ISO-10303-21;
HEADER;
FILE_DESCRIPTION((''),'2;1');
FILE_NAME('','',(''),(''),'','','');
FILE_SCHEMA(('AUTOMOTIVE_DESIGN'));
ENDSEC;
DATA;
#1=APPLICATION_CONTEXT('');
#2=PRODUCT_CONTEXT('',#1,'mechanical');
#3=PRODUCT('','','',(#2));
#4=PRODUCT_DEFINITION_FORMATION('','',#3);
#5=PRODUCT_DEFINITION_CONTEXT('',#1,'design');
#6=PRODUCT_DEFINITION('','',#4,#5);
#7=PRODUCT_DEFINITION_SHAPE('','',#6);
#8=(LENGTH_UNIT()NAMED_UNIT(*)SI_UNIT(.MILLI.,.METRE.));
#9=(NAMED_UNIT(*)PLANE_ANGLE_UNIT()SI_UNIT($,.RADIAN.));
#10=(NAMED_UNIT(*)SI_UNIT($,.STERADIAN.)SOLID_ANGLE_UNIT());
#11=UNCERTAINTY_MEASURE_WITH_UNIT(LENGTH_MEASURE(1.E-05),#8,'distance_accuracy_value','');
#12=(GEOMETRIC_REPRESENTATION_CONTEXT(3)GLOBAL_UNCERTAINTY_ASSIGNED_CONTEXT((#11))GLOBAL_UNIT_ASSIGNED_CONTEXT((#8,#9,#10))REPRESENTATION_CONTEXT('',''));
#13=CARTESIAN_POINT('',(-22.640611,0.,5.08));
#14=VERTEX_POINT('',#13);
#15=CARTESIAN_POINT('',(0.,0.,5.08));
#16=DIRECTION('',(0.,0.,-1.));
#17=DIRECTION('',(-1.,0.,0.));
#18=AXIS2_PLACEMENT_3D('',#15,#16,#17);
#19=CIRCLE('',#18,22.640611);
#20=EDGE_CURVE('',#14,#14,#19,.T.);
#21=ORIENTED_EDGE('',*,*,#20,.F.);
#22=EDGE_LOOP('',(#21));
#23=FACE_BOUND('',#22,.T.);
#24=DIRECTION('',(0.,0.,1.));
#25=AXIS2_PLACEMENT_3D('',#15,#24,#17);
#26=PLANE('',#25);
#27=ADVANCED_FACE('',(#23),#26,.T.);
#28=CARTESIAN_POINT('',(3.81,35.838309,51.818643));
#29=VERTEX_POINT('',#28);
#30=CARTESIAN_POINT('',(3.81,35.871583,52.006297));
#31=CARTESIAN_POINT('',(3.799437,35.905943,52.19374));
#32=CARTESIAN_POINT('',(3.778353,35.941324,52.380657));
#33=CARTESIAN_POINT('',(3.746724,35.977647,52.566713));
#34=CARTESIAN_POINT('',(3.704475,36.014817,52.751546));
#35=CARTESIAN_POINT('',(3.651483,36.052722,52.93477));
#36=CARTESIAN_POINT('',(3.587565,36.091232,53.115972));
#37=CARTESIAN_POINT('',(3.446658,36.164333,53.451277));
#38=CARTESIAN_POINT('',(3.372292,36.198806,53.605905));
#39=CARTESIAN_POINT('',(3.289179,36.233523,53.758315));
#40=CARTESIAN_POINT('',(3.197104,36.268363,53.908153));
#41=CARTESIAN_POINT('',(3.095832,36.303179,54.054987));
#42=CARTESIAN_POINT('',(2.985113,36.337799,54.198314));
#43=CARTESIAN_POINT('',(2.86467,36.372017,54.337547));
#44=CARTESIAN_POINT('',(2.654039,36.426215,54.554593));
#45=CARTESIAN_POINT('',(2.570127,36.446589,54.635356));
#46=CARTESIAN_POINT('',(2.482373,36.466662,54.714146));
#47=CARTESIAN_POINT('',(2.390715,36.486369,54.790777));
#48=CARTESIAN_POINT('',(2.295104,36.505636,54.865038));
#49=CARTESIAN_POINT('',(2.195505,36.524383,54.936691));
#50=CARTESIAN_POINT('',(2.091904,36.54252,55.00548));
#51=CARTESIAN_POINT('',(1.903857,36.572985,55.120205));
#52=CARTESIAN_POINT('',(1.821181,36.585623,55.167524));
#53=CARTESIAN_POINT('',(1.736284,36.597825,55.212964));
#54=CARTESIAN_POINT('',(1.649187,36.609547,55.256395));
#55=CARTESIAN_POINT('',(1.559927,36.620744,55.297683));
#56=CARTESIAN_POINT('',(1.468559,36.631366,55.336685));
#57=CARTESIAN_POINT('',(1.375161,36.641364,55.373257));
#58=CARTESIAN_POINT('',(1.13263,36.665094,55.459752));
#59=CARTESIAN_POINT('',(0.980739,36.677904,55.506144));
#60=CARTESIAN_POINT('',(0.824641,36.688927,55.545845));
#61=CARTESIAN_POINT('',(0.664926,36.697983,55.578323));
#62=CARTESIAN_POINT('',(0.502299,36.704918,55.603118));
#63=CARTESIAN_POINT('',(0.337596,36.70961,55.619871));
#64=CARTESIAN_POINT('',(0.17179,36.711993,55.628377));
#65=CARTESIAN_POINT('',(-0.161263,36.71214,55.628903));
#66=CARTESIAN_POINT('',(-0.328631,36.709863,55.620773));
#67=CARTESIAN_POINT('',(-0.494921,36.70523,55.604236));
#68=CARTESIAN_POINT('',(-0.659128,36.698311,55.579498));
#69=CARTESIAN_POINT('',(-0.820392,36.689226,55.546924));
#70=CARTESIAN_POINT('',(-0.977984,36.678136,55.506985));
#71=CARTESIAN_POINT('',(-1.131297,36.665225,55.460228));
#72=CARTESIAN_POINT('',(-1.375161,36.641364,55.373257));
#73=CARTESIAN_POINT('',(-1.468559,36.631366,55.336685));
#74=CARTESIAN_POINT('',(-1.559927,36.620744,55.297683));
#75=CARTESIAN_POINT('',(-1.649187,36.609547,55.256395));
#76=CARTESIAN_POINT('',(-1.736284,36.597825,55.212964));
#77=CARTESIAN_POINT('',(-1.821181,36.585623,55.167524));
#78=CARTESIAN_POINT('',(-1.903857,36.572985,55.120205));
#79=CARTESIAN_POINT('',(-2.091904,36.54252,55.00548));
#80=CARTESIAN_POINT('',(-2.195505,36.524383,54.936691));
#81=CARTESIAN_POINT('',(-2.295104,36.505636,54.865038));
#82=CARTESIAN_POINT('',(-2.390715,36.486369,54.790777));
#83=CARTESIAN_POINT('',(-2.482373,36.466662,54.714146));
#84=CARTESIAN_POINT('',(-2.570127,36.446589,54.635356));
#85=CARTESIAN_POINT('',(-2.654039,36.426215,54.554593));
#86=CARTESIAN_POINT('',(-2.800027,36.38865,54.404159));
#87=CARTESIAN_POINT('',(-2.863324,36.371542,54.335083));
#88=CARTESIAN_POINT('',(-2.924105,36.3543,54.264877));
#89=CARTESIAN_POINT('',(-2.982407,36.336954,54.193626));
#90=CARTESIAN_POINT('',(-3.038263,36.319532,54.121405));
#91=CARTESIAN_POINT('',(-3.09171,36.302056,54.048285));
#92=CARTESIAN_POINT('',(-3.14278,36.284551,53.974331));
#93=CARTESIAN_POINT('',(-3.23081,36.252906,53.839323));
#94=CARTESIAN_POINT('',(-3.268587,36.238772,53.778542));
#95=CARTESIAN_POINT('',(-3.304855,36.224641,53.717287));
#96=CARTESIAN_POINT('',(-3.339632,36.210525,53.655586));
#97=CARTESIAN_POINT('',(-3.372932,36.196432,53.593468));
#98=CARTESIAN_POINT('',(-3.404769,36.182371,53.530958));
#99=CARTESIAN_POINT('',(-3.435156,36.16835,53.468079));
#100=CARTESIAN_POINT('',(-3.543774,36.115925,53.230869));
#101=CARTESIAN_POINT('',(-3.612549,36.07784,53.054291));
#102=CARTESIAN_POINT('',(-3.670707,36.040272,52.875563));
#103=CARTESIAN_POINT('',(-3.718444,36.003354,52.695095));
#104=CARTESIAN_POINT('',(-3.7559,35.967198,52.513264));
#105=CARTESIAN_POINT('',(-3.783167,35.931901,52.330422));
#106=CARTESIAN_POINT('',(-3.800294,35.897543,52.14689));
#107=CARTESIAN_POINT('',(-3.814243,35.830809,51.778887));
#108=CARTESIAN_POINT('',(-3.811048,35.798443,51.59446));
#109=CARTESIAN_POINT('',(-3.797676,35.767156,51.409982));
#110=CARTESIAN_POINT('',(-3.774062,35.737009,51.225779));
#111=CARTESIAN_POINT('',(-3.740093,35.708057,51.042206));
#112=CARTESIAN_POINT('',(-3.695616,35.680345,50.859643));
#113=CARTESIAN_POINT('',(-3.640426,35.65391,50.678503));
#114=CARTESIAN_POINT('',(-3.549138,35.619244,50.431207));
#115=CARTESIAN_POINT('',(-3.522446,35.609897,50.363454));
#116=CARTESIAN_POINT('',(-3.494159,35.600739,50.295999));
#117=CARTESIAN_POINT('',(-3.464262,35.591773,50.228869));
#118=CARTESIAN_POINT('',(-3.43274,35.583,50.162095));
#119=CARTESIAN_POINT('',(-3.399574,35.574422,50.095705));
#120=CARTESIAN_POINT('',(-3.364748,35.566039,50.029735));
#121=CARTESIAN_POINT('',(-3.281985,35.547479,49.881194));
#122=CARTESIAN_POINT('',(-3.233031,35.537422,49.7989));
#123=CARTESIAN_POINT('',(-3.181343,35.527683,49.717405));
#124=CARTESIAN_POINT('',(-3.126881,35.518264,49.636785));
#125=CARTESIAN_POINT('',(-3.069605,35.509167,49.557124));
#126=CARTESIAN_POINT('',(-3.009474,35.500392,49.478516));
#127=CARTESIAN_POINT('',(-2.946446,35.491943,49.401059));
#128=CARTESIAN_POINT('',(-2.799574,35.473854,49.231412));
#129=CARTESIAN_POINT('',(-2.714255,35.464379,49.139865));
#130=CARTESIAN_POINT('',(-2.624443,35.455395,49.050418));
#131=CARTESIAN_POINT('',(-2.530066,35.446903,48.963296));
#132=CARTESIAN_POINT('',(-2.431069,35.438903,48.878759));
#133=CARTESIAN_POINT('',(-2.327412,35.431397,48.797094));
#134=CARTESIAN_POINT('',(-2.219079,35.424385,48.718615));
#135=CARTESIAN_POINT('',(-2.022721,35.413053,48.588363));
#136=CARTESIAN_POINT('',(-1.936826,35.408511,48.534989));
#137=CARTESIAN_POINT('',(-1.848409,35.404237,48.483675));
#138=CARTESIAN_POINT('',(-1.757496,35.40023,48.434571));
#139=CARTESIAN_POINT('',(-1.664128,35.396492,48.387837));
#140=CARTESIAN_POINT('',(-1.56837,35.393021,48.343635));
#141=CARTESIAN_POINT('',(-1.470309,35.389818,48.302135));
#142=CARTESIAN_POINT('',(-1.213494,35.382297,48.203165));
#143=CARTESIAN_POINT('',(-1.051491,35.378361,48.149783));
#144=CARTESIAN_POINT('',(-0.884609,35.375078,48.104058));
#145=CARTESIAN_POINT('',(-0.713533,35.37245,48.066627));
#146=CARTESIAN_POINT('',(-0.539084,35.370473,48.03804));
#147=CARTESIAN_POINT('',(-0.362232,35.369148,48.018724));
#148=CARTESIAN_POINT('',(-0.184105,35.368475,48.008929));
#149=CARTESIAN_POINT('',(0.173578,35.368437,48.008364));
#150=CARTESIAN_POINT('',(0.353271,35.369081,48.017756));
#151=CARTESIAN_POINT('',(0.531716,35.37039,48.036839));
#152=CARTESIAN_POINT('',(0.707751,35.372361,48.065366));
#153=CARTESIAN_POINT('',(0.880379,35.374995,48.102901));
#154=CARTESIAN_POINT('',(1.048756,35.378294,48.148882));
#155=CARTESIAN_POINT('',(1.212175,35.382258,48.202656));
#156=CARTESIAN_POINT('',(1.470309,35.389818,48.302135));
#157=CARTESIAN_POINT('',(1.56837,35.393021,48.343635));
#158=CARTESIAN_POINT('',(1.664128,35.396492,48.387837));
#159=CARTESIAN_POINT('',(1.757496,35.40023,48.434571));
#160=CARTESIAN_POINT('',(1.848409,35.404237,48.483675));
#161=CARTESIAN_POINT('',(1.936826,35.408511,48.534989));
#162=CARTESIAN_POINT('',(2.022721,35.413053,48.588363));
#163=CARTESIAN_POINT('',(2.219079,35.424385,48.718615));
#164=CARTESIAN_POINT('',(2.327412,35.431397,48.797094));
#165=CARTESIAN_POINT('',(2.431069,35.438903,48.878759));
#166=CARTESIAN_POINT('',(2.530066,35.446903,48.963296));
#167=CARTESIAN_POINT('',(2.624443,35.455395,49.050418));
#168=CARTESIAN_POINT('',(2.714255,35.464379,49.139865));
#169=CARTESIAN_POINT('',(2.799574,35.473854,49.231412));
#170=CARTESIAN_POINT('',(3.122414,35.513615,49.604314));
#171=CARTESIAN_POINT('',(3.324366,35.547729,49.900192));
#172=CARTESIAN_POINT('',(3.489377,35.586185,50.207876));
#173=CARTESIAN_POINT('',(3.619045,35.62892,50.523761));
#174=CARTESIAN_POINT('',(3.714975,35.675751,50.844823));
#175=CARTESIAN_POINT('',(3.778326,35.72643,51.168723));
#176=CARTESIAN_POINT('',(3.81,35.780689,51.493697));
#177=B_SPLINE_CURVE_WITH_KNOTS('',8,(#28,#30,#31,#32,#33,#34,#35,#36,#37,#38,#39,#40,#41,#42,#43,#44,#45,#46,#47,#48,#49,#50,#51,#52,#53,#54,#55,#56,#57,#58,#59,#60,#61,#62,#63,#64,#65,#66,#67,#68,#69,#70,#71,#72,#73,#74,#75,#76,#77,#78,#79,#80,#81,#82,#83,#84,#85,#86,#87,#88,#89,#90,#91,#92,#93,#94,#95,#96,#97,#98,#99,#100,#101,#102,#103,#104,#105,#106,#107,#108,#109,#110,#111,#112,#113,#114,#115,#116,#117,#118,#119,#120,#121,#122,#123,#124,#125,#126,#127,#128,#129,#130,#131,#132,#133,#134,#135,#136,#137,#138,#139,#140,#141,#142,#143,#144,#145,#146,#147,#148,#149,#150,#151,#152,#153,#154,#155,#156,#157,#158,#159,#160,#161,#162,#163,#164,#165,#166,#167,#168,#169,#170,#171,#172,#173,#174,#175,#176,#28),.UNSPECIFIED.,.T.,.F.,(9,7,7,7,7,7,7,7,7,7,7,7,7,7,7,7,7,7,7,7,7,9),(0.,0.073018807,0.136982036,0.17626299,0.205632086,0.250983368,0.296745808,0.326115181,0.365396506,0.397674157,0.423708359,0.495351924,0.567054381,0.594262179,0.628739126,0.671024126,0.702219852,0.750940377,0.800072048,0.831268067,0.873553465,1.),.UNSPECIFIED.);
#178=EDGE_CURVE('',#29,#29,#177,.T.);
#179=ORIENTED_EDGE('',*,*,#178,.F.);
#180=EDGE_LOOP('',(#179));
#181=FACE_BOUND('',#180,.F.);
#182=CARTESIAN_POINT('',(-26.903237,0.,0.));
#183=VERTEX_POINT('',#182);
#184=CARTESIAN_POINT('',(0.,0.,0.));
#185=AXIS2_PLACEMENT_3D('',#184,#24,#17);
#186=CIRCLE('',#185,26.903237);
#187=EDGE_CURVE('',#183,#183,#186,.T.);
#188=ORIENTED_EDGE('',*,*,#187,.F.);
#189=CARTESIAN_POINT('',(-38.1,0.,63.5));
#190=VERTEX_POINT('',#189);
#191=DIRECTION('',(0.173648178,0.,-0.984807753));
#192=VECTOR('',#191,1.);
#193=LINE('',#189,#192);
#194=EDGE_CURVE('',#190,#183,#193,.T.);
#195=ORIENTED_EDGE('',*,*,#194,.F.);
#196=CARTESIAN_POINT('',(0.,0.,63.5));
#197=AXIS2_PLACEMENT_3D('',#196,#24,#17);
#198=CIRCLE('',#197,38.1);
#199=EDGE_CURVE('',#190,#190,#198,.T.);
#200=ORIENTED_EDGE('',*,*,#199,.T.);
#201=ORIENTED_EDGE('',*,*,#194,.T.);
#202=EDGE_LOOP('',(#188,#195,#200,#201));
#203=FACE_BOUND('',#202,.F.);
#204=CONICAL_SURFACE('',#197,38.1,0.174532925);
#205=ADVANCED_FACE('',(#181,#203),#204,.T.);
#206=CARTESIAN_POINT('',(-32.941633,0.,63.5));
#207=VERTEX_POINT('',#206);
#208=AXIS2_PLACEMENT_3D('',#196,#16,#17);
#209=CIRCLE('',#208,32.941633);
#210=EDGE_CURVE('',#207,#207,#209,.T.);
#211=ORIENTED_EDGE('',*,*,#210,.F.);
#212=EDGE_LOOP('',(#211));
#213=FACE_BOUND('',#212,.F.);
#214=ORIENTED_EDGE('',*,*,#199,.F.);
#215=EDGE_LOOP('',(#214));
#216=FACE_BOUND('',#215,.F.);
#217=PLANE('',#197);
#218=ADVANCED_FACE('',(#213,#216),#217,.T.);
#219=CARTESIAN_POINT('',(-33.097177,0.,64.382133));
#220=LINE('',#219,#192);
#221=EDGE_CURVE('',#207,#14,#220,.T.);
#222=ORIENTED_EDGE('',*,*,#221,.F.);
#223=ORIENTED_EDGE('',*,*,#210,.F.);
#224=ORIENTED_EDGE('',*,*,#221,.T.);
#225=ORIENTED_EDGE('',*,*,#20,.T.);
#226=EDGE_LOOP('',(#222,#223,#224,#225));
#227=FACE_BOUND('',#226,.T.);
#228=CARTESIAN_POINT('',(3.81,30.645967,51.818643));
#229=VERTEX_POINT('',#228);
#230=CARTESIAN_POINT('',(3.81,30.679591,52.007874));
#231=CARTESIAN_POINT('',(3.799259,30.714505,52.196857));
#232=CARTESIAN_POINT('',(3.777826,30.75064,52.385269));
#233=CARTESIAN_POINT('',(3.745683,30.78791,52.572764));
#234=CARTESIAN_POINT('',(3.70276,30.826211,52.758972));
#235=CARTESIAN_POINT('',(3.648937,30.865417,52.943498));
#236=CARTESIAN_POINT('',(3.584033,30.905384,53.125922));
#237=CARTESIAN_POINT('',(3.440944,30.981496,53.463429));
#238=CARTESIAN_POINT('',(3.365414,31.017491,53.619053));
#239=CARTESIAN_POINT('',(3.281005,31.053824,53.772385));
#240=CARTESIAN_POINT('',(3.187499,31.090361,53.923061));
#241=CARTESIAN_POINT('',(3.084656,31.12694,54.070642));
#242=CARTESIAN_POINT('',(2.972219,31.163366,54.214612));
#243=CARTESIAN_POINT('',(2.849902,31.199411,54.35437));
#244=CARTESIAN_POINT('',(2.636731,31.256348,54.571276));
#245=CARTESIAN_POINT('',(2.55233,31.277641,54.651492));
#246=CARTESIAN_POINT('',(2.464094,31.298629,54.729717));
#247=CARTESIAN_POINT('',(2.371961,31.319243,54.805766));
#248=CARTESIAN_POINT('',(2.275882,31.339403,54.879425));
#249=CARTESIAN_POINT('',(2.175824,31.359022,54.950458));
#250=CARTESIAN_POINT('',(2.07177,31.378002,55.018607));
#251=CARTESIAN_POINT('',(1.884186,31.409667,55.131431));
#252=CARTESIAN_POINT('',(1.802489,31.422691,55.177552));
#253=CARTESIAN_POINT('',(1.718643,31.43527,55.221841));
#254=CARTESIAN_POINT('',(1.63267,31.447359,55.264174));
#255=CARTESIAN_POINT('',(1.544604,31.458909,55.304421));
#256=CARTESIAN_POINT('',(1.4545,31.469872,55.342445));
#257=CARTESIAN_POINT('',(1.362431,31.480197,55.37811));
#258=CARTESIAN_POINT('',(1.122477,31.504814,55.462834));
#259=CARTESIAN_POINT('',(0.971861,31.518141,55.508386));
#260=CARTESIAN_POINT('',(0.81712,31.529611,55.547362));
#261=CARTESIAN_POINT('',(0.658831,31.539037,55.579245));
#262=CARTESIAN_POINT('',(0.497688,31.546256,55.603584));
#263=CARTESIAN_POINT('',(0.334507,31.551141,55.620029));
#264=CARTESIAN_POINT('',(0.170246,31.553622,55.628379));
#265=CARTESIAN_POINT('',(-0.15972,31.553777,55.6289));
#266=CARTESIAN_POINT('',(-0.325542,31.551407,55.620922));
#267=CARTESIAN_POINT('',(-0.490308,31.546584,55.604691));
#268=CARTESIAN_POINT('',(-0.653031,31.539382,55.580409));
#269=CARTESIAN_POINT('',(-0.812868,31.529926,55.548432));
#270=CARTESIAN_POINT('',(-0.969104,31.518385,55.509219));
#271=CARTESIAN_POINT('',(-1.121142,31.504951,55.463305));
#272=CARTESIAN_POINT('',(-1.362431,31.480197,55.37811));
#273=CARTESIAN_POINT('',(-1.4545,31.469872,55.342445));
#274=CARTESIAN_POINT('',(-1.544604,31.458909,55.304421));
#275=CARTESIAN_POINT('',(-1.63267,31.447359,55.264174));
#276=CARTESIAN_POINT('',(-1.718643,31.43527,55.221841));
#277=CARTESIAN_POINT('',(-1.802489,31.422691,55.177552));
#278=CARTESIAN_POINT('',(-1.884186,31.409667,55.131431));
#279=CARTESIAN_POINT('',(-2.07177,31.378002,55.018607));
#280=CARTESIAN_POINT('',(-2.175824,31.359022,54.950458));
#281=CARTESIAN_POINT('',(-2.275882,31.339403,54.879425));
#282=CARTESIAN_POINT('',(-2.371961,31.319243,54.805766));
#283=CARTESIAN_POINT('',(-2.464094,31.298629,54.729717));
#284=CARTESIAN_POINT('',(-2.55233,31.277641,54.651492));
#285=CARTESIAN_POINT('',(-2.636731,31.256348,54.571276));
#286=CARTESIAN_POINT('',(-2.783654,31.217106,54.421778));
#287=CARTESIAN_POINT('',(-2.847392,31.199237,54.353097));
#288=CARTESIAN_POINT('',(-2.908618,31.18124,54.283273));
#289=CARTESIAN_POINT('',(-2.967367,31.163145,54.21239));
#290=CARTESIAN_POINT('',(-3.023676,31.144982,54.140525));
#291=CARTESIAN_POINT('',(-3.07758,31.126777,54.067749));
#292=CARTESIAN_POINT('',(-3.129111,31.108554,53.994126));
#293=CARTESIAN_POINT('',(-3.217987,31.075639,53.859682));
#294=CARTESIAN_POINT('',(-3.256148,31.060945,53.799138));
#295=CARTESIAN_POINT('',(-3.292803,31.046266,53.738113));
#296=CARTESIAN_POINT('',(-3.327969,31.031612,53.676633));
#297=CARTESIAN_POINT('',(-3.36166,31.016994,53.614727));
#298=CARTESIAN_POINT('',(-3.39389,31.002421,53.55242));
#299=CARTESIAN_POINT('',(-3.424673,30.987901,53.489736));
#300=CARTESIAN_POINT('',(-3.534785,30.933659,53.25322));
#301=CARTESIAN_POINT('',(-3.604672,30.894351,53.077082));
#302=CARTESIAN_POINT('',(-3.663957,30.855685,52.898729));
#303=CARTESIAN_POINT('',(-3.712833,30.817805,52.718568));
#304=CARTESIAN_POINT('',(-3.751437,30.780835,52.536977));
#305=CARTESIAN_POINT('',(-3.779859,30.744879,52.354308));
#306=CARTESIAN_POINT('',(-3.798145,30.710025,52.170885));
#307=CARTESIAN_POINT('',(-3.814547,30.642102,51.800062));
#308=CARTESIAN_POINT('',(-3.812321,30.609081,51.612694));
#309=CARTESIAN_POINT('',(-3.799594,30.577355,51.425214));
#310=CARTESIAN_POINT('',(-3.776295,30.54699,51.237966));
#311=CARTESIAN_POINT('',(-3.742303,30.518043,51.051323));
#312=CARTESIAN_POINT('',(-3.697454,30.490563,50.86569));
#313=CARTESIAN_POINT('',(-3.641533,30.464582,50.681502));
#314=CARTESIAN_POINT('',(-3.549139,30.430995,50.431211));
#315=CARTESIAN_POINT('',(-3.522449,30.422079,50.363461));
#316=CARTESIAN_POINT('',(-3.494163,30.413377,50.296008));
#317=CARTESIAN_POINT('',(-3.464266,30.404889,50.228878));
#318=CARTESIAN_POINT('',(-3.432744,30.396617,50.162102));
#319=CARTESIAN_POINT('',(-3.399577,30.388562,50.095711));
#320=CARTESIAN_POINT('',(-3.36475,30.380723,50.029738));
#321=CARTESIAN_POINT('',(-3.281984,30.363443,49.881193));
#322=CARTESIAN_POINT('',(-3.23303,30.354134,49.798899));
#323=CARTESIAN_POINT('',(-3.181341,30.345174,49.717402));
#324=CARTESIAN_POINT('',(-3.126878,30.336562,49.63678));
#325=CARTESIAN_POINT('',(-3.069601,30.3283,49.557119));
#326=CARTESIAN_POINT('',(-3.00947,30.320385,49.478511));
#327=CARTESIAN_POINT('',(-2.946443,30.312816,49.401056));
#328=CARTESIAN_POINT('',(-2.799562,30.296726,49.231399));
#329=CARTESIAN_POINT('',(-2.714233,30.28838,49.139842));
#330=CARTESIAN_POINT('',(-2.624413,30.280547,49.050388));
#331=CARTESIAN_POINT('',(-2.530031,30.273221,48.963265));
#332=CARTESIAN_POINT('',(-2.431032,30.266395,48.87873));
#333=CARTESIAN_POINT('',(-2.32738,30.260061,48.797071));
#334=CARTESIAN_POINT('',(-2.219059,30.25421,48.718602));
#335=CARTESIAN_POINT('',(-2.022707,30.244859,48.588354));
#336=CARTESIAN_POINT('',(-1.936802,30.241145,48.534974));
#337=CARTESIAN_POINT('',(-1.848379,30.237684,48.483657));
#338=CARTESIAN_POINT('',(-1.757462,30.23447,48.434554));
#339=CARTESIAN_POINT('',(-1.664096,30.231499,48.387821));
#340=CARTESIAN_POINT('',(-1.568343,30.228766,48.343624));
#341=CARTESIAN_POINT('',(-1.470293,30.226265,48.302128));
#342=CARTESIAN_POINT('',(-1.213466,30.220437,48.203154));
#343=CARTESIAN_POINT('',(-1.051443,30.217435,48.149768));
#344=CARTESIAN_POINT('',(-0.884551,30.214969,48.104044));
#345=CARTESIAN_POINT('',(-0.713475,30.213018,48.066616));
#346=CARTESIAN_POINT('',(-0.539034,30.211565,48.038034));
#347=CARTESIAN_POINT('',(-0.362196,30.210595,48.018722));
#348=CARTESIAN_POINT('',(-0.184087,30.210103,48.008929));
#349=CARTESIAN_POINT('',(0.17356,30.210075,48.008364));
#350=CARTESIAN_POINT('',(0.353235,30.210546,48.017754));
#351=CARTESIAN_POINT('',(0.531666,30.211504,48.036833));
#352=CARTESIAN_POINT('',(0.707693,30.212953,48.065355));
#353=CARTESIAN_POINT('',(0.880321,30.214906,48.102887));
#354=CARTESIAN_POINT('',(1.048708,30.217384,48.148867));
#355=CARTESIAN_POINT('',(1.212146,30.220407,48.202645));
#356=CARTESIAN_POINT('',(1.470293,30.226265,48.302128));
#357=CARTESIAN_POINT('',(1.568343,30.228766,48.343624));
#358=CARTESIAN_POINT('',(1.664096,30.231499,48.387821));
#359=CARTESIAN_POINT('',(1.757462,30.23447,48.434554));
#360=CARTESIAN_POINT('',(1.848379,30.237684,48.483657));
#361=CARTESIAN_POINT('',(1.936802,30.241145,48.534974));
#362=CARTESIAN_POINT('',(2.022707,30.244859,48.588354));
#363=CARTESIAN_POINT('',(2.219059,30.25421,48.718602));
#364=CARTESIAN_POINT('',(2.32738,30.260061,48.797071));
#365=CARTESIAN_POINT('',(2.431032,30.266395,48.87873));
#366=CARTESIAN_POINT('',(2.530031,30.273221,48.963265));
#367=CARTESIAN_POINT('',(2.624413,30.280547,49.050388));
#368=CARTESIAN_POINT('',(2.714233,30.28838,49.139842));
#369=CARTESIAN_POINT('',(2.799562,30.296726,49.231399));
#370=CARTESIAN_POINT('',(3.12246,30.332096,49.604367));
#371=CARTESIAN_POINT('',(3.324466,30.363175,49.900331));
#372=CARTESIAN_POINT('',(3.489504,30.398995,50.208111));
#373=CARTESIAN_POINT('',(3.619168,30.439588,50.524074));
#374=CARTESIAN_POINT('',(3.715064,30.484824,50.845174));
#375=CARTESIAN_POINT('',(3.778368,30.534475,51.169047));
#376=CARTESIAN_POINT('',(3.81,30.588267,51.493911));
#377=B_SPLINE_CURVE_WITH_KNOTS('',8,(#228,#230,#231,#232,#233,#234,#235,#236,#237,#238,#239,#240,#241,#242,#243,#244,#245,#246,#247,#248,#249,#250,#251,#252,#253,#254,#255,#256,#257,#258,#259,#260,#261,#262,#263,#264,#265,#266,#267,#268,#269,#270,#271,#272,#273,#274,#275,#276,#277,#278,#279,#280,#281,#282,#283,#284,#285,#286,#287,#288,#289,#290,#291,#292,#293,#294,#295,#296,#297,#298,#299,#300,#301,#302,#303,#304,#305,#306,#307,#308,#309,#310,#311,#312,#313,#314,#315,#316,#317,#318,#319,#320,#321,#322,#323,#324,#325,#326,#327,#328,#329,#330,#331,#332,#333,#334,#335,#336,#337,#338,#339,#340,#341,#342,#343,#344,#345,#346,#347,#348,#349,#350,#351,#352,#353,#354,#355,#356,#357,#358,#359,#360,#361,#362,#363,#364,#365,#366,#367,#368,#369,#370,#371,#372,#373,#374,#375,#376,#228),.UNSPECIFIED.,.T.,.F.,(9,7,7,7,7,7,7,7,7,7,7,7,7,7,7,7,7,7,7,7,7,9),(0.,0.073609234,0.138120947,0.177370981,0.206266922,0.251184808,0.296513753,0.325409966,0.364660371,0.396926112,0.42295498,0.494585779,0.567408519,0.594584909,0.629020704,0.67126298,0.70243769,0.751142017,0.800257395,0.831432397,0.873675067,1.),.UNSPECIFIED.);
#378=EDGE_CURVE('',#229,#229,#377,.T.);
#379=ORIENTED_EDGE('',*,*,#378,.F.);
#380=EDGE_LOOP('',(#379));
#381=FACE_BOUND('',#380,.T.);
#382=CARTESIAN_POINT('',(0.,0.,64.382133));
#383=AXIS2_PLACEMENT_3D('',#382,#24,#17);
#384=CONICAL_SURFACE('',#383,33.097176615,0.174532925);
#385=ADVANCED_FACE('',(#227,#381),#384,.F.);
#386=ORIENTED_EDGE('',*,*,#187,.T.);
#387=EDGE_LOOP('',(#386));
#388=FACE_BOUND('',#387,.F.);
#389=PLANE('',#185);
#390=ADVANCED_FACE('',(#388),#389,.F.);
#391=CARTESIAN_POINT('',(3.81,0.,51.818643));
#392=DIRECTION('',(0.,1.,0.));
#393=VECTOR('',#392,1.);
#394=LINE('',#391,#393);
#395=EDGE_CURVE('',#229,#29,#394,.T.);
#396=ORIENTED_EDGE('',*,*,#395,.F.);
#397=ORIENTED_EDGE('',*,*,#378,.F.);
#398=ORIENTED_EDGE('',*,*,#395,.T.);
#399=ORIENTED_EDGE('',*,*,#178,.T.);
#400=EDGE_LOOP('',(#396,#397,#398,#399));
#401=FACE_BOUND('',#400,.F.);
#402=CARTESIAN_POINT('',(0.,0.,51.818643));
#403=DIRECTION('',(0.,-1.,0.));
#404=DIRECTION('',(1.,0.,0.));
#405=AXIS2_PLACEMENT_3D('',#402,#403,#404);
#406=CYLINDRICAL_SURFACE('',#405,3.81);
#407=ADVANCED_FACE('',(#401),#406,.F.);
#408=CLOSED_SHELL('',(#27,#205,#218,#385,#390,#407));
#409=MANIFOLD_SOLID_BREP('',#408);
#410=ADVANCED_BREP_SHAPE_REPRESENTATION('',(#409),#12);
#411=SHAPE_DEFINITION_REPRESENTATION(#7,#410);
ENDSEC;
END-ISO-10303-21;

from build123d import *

# Parameters (mm, degrees)
F2_T     = -5.08
F3_R     = 3.81
F4_DEPTH = 304.8


# Not quite as in the source:
# - a feature names something its author has since deleted; it is built from what else it names


with BuildPart() as f1:
    # F0 (on Front) → F1 (revolve)
    with BuildSketch(Plane.XZ):
        Polygon((0, 0), (0, 63.5), (-38.1, 63.5), (-26.903236725, 0), align=None)
    revolve(axis=Axis((0, 0, 31.75), (0, 0, 1)))

    # F2
    f2_openings = [f1.faces().sort_by_distance(p)[0] for p in [
        (0, 0, 63.5),
    ]]
    offset(amount=F2_T, openings=f2_openings)

    # F3 (on Front) → F4 (cut)
    with BuildSketch(Plane.XZ):
        with Locations((0, 51.8186431976)):
            Circle(F3_R)
    extrude(amount=-F4_DEPTH, mode=Mode.SUBTRACT)


solid = f1.part
